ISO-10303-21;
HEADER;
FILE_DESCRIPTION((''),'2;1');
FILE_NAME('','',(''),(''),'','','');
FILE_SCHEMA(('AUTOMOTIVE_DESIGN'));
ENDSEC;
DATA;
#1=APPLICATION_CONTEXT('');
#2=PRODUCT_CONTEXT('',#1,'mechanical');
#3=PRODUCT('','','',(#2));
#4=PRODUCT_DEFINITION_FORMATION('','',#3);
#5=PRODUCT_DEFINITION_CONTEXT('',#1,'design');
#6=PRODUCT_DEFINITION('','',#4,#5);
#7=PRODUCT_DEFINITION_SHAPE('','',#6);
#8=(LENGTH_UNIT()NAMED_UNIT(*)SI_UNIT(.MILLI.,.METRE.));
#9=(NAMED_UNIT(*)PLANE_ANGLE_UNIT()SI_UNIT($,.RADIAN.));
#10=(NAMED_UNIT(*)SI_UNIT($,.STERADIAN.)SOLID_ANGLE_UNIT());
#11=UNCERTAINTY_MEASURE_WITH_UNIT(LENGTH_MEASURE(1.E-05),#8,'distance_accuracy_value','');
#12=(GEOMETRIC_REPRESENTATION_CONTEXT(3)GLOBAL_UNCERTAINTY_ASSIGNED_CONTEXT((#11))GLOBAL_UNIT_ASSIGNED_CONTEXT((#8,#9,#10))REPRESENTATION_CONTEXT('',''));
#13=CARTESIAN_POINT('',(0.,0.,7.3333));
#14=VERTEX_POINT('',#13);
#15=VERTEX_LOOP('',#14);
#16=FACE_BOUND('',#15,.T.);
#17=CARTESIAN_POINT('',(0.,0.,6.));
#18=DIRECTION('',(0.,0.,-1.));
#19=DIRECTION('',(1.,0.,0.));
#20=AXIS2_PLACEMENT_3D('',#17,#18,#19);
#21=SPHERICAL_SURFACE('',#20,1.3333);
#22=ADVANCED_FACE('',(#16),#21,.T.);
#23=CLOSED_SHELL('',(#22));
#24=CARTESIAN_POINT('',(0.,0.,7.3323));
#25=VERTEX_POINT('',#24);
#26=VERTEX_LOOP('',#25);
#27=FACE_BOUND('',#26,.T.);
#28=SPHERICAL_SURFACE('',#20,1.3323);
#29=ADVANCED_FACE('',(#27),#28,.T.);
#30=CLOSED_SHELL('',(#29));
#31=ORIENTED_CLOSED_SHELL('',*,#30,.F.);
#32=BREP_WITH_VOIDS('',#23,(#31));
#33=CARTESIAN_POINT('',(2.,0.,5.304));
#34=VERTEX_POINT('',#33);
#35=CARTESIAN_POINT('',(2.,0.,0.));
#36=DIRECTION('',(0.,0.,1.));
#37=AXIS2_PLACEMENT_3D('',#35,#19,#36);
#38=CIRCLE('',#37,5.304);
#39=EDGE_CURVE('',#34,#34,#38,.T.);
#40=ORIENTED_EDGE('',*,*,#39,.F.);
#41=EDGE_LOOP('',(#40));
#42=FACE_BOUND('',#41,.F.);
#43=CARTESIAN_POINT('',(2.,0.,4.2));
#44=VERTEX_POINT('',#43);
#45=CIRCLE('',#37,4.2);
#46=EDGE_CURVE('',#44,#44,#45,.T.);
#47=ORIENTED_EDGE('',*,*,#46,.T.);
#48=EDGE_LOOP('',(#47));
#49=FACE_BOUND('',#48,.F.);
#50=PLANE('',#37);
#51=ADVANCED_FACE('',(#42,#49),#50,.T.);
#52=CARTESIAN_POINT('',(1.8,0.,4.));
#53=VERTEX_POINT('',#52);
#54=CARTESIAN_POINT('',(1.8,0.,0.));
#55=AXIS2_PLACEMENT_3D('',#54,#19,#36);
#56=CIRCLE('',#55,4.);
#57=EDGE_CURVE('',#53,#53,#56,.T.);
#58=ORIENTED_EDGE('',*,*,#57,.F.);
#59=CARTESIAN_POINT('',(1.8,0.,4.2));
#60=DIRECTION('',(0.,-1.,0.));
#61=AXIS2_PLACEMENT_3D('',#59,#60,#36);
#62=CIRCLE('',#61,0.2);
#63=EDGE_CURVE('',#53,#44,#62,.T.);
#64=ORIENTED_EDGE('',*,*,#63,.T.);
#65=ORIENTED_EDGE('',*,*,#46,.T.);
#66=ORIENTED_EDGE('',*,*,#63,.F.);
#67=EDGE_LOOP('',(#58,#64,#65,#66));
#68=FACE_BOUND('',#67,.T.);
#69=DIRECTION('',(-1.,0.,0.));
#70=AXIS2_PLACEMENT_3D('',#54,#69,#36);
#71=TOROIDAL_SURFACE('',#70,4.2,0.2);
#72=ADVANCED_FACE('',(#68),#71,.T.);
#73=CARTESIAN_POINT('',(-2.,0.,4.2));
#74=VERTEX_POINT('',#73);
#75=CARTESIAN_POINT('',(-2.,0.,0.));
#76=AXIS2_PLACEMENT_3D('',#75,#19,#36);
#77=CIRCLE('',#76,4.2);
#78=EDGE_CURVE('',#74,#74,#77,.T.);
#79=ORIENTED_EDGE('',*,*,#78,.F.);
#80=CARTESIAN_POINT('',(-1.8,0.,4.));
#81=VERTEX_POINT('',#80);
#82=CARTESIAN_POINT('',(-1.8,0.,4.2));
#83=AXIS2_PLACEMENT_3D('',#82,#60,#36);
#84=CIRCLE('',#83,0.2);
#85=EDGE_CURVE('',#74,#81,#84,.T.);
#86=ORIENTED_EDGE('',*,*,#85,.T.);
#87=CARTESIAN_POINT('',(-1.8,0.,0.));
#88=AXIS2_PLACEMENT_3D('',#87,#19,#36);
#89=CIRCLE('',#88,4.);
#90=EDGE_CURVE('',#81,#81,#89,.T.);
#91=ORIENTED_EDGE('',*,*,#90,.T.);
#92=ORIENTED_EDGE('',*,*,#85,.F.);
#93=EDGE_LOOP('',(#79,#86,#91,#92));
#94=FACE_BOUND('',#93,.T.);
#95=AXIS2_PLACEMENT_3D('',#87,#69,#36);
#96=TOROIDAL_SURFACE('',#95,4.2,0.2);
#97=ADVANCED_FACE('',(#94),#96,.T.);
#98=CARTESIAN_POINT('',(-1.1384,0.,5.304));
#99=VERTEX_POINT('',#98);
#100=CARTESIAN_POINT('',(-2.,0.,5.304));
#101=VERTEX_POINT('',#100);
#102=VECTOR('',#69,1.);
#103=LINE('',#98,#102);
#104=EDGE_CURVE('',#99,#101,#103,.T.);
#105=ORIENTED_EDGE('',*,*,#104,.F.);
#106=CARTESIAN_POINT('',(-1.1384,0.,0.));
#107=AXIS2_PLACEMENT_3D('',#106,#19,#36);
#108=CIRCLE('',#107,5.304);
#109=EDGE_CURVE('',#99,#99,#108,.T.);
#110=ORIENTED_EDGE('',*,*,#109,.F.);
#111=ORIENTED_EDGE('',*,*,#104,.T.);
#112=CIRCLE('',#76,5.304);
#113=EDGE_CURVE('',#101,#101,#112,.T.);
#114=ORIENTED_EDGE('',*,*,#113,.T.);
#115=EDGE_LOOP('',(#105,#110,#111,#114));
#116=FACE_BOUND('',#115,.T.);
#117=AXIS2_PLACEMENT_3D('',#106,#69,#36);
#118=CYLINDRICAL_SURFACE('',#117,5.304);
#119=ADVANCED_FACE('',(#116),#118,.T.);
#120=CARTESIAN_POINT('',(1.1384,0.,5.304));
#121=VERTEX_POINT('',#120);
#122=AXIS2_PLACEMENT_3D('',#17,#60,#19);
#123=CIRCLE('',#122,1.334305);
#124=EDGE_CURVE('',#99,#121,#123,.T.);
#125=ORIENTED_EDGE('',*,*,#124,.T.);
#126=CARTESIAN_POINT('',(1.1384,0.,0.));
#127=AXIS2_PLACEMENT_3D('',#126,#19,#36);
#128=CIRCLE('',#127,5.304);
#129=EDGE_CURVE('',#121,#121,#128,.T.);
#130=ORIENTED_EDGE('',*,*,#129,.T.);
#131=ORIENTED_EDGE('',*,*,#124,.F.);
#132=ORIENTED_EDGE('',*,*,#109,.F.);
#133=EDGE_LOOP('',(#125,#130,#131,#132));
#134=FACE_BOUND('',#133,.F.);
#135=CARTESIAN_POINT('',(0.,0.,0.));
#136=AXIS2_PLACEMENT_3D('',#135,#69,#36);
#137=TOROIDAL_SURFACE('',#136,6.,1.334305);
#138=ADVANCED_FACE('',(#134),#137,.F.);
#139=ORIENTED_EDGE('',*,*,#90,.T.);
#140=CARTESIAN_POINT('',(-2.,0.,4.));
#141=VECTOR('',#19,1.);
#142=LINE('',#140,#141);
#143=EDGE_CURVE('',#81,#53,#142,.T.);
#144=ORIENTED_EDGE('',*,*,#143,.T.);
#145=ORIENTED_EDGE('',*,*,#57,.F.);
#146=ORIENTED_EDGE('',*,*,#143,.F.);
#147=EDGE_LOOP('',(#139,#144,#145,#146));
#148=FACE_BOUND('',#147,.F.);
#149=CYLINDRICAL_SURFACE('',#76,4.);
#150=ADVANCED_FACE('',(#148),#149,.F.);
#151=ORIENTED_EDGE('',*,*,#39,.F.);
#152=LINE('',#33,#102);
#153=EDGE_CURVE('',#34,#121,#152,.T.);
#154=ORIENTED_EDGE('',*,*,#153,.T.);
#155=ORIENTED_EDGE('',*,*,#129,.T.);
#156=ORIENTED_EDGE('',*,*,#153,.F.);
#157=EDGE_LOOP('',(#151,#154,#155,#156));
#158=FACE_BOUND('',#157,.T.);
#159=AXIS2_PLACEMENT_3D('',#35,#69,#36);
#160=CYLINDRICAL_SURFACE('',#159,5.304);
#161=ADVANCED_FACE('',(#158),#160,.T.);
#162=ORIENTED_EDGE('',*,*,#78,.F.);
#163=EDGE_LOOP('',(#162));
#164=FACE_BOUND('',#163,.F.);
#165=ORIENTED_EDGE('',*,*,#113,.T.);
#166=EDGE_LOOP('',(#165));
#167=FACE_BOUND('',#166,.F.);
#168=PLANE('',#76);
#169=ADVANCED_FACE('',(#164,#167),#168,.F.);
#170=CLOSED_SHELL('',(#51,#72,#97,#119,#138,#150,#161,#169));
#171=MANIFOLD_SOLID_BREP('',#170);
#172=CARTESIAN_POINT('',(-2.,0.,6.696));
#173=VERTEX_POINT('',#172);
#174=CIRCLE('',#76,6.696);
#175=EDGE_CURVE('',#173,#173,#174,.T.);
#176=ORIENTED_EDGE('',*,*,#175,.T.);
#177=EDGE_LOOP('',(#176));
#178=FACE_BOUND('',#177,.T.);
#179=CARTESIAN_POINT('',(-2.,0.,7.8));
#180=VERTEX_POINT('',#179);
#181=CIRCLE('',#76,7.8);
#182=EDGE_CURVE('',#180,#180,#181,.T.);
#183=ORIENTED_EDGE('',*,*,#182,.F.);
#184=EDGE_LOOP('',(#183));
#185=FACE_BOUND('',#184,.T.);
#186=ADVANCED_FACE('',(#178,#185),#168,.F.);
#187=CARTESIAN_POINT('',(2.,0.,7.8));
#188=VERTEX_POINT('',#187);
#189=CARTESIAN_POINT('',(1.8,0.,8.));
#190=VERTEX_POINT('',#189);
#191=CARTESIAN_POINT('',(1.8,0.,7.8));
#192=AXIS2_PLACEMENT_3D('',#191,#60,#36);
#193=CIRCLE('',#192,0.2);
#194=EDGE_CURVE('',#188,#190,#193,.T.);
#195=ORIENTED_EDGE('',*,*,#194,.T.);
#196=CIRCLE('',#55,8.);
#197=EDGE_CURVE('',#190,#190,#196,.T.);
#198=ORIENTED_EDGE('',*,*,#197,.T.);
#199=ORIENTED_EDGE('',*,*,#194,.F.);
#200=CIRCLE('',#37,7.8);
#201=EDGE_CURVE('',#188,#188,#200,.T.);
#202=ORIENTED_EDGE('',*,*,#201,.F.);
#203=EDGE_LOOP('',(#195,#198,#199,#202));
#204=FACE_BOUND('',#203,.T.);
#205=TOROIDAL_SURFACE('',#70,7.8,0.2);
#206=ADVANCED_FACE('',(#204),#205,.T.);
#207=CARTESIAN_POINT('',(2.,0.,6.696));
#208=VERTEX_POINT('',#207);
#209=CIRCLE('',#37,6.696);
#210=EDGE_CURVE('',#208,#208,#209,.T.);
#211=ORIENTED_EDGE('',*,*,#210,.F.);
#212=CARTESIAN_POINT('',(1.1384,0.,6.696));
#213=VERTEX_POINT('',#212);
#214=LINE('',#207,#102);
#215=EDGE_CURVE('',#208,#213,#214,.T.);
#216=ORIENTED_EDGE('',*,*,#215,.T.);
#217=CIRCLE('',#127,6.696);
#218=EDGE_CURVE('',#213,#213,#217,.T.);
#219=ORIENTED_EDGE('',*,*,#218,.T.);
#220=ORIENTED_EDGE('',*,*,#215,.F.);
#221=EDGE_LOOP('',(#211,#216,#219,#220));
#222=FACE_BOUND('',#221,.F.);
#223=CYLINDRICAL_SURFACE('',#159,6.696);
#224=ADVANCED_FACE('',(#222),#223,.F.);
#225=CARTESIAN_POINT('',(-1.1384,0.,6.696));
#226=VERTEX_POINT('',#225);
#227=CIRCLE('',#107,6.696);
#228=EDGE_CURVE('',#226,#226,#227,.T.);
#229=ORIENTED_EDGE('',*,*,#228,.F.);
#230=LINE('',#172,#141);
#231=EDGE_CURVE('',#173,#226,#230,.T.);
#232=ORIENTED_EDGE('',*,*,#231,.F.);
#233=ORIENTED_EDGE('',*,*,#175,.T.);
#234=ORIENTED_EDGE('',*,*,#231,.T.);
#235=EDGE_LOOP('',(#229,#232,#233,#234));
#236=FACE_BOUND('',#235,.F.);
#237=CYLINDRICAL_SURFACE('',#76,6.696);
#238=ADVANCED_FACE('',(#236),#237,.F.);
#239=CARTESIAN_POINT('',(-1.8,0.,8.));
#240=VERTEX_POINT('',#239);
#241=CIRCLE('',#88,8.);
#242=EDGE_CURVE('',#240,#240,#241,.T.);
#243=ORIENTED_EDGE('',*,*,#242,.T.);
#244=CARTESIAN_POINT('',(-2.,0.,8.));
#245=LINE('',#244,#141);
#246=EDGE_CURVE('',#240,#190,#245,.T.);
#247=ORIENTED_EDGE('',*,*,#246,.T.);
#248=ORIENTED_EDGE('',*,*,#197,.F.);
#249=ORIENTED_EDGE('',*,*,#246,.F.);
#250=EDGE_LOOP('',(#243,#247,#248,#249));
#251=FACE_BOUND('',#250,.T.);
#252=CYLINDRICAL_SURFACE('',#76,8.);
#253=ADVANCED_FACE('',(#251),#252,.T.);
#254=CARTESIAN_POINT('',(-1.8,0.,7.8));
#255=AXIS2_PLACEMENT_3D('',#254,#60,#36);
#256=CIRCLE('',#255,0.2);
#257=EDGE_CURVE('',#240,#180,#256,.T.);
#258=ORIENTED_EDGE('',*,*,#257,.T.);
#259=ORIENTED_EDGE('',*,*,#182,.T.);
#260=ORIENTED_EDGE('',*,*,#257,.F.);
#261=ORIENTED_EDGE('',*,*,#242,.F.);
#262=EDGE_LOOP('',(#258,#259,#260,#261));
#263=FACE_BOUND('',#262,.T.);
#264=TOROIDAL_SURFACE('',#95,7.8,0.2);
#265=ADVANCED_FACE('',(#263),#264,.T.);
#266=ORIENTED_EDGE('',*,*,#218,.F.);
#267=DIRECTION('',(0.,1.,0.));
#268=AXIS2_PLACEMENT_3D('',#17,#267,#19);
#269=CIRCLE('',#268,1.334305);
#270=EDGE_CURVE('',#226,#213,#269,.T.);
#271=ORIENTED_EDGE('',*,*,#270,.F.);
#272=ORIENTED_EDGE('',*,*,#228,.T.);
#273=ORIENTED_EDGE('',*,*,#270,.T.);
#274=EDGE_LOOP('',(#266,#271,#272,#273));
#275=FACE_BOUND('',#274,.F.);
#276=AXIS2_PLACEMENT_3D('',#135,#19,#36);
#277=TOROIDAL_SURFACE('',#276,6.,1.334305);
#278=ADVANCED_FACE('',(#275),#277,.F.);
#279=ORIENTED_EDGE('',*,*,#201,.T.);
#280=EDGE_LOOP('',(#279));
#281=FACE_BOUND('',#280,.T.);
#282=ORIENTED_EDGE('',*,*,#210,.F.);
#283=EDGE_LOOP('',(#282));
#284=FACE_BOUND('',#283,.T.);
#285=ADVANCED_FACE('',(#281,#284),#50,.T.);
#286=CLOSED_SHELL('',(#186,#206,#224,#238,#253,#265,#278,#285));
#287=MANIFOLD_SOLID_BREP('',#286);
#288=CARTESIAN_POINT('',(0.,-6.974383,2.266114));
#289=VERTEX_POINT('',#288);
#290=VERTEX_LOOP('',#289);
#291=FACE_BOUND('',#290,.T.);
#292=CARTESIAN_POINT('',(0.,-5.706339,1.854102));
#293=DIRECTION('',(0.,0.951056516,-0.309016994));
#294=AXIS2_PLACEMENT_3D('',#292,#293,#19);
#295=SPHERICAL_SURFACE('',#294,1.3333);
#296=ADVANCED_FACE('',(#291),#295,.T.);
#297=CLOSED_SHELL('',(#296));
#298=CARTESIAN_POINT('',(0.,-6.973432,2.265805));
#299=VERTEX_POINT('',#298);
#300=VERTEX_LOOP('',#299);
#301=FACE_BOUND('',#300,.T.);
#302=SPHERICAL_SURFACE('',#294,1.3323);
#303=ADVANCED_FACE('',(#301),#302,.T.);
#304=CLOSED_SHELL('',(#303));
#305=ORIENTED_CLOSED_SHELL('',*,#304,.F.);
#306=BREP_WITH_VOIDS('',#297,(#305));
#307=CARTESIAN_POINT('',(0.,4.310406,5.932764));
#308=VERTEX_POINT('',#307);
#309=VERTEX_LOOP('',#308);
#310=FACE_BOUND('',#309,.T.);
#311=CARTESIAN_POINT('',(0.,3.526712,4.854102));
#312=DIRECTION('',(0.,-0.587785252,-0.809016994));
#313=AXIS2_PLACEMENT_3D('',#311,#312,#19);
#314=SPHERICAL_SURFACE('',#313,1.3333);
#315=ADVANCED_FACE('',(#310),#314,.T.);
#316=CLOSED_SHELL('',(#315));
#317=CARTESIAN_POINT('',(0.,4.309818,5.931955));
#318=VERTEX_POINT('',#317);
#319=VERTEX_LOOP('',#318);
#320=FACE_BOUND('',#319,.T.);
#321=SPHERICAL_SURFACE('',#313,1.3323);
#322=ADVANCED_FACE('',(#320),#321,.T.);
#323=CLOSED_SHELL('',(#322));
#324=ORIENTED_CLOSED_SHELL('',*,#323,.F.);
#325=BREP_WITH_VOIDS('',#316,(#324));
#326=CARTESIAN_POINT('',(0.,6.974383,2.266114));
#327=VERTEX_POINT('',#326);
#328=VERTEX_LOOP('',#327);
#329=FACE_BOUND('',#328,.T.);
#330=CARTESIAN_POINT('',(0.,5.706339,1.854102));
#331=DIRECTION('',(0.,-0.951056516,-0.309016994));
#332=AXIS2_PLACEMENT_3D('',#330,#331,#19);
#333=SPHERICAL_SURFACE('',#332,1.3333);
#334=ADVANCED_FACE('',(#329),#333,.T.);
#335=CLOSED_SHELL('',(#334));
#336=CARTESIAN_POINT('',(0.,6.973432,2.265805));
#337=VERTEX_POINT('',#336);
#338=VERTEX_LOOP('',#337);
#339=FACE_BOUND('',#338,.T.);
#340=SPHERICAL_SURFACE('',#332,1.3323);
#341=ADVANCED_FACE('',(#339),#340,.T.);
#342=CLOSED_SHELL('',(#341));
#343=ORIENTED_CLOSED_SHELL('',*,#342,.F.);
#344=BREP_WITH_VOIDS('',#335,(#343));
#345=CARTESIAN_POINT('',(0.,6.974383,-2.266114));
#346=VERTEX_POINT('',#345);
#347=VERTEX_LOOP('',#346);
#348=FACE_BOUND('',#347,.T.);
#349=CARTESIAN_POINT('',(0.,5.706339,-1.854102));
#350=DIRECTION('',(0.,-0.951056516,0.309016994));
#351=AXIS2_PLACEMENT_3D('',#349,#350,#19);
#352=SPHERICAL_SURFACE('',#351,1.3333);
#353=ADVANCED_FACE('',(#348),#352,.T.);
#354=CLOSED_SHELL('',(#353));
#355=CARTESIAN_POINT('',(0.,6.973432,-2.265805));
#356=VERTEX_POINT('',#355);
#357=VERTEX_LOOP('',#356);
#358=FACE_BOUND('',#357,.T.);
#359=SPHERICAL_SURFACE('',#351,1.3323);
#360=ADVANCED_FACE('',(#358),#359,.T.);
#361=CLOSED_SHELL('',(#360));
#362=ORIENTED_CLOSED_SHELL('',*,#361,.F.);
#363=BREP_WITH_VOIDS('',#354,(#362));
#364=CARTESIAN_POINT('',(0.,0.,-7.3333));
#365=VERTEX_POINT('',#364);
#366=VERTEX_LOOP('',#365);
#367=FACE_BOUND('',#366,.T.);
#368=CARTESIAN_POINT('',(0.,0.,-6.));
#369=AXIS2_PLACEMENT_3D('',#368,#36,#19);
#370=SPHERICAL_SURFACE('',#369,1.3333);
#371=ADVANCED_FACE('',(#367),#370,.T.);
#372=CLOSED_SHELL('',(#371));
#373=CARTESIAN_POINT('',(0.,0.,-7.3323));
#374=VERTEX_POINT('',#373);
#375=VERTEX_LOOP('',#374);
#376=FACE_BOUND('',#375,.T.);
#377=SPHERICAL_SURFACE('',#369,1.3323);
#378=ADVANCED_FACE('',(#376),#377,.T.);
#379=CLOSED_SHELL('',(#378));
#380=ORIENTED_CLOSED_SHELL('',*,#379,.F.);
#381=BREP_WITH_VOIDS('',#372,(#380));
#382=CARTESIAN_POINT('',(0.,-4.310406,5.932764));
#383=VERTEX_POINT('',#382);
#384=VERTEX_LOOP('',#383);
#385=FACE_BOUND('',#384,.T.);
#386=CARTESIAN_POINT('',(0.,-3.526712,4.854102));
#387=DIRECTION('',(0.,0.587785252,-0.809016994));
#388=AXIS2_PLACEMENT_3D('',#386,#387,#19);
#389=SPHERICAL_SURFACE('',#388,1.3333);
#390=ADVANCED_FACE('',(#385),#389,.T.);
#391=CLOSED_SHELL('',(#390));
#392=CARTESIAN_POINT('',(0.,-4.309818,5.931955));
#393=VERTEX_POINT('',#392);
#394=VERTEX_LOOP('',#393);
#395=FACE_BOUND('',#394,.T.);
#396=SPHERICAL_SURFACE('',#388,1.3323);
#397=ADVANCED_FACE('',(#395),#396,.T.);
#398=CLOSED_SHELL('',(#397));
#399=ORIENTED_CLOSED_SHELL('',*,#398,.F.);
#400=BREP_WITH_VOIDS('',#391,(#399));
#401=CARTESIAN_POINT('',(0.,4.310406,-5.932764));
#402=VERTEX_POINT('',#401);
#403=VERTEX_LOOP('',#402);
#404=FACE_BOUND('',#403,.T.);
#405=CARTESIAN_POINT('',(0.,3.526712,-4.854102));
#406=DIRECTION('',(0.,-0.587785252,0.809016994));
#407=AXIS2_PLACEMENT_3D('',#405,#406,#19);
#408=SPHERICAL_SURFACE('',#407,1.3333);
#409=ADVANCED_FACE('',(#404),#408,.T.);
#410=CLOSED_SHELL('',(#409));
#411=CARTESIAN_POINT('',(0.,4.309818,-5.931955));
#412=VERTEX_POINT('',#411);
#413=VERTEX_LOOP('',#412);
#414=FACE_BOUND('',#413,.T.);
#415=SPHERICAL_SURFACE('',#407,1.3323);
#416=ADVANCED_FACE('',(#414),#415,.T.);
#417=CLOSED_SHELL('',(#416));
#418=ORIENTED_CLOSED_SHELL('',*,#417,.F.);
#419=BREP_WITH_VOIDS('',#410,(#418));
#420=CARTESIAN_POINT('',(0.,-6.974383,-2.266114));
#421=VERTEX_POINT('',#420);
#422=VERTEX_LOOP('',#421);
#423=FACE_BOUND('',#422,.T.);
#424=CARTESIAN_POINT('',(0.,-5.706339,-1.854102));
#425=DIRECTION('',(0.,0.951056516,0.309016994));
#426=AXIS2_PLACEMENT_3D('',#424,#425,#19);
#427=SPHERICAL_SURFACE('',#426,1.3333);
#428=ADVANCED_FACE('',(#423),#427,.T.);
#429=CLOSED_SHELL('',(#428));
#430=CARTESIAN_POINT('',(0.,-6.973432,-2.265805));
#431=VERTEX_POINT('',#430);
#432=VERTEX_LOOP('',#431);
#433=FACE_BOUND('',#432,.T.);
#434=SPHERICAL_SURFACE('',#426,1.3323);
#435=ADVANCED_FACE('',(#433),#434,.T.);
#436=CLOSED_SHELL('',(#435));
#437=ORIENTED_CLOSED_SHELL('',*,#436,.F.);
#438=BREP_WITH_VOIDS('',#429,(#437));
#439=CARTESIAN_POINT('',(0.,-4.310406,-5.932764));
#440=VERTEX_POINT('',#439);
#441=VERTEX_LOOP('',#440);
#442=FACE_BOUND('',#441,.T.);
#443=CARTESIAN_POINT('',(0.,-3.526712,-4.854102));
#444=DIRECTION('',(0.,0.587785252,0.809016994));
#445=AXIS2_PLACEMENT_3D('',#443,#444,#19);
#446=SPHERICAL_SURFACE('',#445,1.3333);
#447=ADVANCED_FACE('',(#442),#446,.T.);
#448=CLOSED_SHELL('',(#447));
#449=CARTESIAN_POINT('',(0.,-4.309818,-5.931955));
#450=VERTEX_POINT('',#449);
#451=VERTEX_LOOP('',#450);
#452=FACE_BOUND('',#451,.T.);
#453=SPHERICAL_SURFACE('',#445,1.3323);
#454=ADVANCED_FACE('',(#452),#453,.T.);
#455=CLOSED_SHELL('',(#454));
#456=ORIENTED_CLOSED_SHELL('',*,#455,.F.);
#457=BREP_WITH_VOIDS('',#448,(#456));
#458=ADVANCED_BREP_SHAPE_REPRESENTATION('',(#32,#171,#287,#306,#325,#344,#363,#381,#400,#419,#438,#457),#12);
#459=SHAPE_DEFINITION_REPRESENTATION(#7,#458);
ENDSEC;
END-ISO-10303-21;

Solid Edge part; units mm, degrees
sketch "Sketch1" plane through (0, 0, 0) normal (0, -1, 0) x (1, 0, 0)
  arc A0 (0, 7.3333) -> (0, 4.6667) centre (0, 6) cw
  dimension "D1" = 1.3333
revolve "RevolvedProtrusion1" add sketch "Sketch1" angle 360 about axis through (0, 0, 30.6346) along (0, 0, 1)
shell "Thinwall1" thickness 0.001 removed faces 0
pattern_circular "Pattern1" count 10 over 360 about axis through (0, 0, 0) along (1, 0, 0) of "RevolvedProtrusion1", "Thinwall1"
sketch "Sketch2" plane through (0, 0, 0) normal (0, -1, 0) x (1, 0, 0)
  line L0 (-2, 5.304) -> (-2, 4)
  line L1 (-2, 4) -> (2, 4)
  line L2 (2, 4) -> (2, 5.304)
  line L3 (2, 5.304) -> (1.1384, 5.304)
  arc A0 (-1.1384, 5.304) -> (1.1384, 5.304) centre (0, 6) ccw
  line L4 (-1.1384, 5.304) -> (-2, 5.304)
  line L5 (-2, 6.696) -> (-1.1384, 6.696)
  arc A1 (-1.1384, 6.696) -> (1.1384, 6.696) centre (0, 6) cw
  line L6 (2, 6.696) -> (1.1384, 6.696)
  line L7 (2, 8) -> (2, 6.696)
  line L8 (-2, 8) -> (2, 8)
  line L9 (-2, 6.696) -> (-2, 8)
  dimension "D1" = 4
  dimension "D2" = 1.3343
  dimension "D3" = 1.3343
revolve "RevolvedProtrusion2" add sketch "Sketch2" angle 360 about axis through (-60, 0, 0) along (1, 0, 0)
fillet "Round1" radius 0.2 4 edges at (-2, 0, -8) (2, 0, -8) (2, 0, -4) (-2, 0, -4)
properties material "Stahl"
